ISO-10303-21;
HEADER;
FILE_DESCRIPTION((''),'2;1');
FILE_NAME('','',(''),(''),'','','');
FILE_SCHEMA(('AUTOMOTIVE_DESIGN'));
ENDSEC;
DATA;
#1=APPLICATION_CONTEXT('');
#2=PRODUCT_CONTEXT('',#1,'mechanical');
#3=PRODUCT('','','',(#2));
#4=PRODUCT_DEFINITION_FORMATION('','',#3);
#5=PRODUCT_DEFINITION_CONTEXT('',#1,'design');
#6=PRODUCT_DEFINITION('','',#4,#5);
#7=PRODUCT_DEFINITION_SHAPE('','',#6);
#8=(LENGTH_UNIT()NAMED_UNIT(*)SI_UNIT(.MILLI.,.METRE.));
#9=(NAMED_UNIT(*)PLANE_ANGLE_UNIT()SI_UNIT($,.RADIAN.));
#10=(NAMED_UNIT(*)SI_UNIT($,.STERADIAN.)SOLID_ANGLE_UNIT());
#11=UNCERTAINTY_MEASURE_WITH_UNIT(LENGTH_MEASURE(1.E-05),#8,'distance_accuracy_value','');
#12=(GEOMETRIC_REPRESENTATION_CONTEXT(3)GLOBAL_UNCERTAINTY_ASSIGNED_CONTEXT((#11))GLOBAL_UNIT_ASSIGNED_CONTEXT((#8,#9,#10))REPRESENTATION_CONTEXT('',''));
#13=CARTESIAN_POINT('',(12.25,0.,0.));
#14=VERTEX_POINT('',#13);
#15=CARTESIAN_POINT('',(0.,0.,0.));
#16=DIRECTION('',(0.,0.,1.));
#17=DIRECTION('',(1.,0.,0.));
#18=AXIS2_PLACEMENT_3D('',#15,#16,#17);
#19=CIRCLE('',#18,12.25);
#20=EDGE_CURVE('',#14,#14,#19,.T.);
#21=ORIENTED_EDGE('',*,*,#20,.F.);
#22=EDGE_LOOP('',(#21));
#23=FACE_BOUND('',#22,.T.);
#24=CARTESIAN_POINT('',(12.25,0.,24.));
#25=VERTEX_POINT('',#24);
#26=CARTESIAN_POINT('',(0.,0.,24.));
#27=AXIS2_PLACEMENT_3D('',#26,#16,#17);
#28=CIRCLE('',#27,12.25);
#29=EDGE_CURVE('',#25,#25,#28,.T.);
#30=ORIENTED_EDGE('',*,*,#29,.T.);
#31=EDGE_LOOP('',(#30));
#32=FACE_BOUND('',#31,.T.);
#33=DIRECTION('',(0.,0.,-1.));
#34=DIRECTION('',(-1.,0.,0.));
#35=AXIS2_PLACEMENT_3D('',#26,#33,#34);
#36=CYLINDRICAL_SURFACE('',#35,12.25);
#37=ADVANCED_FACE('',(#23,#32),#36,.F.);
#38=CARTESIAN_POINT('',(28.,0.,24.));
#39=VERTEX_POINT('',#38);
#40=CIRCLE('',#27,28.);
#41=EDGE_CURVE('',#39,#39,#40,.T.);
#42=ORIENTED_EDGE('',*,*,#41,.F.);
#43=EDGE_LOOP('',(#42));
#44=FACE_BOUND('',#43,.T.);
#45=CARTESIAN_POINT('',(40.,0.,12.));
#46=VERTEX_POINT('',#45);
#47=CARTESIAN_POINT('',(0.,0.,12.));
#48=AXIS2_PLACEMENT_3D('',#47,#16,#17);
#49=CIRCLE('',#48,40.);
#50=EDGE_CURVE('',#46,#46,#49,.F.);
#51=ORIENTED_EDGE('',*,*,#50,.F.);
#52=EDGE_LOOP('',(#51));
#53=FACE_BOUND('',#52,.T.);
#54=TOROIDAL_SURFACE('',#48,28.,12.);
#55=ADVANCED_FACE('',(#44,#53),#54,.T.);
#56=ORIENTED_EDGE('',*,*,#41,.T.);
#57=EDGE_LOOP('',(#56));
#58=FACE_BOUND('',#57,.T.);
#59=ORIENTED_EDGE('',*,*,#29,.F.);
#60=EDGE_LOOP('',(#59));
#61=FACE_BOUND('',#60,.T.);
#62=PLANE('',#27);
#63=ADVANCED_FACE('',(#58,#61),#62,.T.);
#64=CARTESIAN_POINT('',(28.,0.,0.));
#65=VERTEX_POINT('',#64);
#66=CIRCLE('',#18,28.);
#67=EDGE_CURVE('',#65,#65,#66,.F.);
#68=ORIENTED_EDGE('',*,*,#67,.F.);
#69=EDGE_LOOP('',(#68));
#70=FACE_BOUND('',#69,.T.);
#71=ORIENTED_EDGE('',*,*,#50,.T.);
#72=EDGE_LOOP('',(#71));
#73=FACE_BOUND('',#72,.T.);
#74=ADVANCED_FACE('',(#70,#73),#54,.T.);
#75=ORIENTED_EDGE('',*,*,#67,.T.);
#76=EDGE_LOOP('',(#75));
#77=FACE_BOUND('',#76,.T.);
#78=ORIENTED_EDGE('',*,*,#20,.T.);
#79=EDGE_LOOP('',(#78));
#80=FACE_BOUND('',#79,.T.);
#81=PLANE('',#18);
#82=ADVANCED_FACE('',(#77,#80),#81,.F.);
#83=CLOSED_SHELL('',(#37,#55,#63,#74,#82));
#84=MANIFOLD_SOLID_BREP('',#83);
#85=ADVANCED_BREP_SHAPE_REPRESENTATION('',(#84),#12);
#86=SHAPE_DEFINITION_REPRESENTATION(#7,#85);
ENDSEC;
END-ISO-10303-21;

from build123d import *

# Parameters (mm, degrees)
ESQUISSE1_R        = 40
ESQUISSE1_R_2      = 12.25
BOSS_EXTRU_1_DEPTH = 24
CONG_1_R           = 12


with BuildPart() as part:
    # Esquisse1 → Boss.-Extru.1 (new body)
    with BuildSketch(Plane.XY):
        Circle(ESQUISSE1_R)
        Circle(ESQUISSE1_R_2, mode=Mode.SUBTRACT)
    extrude(amount=BOSS_EXTRU_1_DEPTH)

    # Congé1
    cong_1_edges = [part.edges().sort_by_distance(p)[0] for p in [
        (-40, 0, 0),
        (-40, 0, 24),
    ]]
    fillet(cong_1_edges, radius=CONG_1_R - 0.0001)  # a hair under: the kernel refuses the full size


solid = part.part
